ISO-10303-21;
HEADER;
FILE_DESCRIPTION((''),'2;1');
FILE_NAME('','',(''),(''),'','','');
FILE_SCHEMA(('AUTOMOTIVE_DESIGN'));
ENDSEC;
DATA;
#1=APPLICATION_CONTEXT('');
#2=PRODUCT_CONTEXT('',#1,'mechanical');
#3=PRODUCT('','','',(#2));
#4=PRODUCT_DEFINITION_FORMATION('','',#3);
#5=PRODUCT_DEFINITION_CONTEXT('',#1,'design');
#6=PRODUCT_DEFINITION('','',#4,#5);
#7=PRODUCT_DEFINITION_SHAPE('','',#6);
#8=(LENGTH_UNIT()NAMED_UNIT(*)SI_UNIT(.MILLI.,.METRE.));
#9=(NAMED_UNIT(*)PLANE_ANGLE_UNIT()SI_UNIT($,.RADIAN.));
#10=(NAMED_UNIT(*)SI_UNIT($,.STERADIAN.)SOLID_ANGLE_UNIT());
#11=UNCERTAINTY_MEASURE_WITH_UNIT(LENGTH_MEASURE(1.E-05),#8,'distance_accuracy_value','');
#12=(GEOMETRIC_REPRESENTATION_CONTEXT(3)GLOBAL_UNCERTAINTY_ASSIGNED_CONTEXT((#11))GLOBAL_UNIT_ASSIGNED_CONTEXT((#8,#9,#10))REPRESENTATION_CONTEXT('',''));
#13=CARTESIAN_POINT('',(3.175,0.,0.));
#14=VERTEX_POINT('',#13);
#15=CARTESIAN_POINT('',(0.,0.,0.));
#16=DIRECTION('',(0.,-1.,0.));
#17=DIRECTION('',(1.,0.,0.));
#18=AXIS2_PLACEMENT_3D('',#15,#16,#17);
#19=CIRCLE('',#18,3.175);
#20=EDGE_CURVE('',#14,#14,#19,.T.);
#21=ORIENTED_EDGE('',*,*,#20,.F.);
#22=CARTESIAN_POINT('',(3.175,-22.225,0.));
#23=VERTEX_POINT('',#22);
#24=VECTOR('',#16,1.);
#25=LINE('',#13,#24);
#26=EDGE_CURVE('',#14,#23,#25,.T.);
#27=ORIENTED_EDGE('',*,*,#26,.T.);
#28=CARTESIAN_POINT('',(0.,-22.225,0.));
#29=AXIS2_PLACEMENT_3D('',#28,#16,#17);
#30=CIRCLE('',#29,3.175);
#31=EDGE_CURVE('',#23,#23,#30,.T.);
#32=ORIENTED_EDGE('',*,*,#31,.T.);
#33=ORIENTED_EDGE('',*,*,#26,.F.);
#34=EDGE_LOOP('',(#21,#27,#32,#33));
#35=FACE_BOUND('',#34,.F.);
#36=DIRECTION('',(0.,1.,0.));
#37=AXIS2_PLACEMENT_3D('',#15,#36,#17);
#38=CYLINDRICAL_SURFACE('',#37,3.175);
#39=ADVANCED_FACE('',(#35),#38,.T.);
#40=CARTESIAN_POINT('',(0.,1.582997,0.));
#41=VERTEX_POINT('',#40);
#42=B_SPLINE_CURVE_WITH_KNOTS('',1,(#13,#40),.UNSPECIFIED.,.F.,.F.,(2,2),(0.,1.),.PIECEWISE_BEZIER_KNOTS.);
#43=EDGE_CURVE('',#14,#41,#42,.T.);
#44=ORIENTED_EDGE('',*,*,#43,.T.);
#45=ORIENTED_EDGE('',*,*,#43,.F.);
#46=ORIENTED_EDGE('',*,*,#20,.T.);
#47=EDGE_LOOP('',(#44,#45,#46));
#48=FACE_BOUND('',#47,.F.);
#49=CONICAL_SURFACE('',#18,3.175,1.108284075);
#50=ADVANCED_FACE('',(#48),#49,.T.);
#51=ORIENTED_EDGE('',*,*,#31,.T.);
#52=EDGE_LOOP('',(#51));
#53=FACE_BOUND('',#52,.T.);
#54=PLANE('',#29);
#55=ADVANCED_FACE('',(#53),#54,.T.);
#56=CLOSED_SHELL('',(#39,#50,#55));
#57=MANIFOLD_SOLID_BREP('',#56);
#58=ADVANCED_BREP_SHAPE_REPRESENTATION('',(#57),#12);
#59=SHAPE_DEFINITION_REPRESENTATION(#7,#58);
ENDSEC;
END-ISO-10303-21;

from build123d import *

# Parameters (mm, degrees)
F0_R     = 3.175
F1_DEPTH = 22.225


# Not quite as in the source:
# - an extrude whose draft closes it to a point is written as a loft to that point


with BuildPart() as f1:
    # F0 (on Front) → F1 (new body)
    with BuildSketch(Plane.XZ):
        Circle(F0_R)
    extrude(amount=F1_DEPTH)

    # F0 (on Front) → F2 section 0
    with BuildSketch(Plane.XZ, mode=Mode.PRIVATE) as f2_s0:
        Circle(F0_R)
    loft([f2_s0.sketch, Vertex(0, 1.5829966056, 0)], ruled=True)


solid = f1.part
